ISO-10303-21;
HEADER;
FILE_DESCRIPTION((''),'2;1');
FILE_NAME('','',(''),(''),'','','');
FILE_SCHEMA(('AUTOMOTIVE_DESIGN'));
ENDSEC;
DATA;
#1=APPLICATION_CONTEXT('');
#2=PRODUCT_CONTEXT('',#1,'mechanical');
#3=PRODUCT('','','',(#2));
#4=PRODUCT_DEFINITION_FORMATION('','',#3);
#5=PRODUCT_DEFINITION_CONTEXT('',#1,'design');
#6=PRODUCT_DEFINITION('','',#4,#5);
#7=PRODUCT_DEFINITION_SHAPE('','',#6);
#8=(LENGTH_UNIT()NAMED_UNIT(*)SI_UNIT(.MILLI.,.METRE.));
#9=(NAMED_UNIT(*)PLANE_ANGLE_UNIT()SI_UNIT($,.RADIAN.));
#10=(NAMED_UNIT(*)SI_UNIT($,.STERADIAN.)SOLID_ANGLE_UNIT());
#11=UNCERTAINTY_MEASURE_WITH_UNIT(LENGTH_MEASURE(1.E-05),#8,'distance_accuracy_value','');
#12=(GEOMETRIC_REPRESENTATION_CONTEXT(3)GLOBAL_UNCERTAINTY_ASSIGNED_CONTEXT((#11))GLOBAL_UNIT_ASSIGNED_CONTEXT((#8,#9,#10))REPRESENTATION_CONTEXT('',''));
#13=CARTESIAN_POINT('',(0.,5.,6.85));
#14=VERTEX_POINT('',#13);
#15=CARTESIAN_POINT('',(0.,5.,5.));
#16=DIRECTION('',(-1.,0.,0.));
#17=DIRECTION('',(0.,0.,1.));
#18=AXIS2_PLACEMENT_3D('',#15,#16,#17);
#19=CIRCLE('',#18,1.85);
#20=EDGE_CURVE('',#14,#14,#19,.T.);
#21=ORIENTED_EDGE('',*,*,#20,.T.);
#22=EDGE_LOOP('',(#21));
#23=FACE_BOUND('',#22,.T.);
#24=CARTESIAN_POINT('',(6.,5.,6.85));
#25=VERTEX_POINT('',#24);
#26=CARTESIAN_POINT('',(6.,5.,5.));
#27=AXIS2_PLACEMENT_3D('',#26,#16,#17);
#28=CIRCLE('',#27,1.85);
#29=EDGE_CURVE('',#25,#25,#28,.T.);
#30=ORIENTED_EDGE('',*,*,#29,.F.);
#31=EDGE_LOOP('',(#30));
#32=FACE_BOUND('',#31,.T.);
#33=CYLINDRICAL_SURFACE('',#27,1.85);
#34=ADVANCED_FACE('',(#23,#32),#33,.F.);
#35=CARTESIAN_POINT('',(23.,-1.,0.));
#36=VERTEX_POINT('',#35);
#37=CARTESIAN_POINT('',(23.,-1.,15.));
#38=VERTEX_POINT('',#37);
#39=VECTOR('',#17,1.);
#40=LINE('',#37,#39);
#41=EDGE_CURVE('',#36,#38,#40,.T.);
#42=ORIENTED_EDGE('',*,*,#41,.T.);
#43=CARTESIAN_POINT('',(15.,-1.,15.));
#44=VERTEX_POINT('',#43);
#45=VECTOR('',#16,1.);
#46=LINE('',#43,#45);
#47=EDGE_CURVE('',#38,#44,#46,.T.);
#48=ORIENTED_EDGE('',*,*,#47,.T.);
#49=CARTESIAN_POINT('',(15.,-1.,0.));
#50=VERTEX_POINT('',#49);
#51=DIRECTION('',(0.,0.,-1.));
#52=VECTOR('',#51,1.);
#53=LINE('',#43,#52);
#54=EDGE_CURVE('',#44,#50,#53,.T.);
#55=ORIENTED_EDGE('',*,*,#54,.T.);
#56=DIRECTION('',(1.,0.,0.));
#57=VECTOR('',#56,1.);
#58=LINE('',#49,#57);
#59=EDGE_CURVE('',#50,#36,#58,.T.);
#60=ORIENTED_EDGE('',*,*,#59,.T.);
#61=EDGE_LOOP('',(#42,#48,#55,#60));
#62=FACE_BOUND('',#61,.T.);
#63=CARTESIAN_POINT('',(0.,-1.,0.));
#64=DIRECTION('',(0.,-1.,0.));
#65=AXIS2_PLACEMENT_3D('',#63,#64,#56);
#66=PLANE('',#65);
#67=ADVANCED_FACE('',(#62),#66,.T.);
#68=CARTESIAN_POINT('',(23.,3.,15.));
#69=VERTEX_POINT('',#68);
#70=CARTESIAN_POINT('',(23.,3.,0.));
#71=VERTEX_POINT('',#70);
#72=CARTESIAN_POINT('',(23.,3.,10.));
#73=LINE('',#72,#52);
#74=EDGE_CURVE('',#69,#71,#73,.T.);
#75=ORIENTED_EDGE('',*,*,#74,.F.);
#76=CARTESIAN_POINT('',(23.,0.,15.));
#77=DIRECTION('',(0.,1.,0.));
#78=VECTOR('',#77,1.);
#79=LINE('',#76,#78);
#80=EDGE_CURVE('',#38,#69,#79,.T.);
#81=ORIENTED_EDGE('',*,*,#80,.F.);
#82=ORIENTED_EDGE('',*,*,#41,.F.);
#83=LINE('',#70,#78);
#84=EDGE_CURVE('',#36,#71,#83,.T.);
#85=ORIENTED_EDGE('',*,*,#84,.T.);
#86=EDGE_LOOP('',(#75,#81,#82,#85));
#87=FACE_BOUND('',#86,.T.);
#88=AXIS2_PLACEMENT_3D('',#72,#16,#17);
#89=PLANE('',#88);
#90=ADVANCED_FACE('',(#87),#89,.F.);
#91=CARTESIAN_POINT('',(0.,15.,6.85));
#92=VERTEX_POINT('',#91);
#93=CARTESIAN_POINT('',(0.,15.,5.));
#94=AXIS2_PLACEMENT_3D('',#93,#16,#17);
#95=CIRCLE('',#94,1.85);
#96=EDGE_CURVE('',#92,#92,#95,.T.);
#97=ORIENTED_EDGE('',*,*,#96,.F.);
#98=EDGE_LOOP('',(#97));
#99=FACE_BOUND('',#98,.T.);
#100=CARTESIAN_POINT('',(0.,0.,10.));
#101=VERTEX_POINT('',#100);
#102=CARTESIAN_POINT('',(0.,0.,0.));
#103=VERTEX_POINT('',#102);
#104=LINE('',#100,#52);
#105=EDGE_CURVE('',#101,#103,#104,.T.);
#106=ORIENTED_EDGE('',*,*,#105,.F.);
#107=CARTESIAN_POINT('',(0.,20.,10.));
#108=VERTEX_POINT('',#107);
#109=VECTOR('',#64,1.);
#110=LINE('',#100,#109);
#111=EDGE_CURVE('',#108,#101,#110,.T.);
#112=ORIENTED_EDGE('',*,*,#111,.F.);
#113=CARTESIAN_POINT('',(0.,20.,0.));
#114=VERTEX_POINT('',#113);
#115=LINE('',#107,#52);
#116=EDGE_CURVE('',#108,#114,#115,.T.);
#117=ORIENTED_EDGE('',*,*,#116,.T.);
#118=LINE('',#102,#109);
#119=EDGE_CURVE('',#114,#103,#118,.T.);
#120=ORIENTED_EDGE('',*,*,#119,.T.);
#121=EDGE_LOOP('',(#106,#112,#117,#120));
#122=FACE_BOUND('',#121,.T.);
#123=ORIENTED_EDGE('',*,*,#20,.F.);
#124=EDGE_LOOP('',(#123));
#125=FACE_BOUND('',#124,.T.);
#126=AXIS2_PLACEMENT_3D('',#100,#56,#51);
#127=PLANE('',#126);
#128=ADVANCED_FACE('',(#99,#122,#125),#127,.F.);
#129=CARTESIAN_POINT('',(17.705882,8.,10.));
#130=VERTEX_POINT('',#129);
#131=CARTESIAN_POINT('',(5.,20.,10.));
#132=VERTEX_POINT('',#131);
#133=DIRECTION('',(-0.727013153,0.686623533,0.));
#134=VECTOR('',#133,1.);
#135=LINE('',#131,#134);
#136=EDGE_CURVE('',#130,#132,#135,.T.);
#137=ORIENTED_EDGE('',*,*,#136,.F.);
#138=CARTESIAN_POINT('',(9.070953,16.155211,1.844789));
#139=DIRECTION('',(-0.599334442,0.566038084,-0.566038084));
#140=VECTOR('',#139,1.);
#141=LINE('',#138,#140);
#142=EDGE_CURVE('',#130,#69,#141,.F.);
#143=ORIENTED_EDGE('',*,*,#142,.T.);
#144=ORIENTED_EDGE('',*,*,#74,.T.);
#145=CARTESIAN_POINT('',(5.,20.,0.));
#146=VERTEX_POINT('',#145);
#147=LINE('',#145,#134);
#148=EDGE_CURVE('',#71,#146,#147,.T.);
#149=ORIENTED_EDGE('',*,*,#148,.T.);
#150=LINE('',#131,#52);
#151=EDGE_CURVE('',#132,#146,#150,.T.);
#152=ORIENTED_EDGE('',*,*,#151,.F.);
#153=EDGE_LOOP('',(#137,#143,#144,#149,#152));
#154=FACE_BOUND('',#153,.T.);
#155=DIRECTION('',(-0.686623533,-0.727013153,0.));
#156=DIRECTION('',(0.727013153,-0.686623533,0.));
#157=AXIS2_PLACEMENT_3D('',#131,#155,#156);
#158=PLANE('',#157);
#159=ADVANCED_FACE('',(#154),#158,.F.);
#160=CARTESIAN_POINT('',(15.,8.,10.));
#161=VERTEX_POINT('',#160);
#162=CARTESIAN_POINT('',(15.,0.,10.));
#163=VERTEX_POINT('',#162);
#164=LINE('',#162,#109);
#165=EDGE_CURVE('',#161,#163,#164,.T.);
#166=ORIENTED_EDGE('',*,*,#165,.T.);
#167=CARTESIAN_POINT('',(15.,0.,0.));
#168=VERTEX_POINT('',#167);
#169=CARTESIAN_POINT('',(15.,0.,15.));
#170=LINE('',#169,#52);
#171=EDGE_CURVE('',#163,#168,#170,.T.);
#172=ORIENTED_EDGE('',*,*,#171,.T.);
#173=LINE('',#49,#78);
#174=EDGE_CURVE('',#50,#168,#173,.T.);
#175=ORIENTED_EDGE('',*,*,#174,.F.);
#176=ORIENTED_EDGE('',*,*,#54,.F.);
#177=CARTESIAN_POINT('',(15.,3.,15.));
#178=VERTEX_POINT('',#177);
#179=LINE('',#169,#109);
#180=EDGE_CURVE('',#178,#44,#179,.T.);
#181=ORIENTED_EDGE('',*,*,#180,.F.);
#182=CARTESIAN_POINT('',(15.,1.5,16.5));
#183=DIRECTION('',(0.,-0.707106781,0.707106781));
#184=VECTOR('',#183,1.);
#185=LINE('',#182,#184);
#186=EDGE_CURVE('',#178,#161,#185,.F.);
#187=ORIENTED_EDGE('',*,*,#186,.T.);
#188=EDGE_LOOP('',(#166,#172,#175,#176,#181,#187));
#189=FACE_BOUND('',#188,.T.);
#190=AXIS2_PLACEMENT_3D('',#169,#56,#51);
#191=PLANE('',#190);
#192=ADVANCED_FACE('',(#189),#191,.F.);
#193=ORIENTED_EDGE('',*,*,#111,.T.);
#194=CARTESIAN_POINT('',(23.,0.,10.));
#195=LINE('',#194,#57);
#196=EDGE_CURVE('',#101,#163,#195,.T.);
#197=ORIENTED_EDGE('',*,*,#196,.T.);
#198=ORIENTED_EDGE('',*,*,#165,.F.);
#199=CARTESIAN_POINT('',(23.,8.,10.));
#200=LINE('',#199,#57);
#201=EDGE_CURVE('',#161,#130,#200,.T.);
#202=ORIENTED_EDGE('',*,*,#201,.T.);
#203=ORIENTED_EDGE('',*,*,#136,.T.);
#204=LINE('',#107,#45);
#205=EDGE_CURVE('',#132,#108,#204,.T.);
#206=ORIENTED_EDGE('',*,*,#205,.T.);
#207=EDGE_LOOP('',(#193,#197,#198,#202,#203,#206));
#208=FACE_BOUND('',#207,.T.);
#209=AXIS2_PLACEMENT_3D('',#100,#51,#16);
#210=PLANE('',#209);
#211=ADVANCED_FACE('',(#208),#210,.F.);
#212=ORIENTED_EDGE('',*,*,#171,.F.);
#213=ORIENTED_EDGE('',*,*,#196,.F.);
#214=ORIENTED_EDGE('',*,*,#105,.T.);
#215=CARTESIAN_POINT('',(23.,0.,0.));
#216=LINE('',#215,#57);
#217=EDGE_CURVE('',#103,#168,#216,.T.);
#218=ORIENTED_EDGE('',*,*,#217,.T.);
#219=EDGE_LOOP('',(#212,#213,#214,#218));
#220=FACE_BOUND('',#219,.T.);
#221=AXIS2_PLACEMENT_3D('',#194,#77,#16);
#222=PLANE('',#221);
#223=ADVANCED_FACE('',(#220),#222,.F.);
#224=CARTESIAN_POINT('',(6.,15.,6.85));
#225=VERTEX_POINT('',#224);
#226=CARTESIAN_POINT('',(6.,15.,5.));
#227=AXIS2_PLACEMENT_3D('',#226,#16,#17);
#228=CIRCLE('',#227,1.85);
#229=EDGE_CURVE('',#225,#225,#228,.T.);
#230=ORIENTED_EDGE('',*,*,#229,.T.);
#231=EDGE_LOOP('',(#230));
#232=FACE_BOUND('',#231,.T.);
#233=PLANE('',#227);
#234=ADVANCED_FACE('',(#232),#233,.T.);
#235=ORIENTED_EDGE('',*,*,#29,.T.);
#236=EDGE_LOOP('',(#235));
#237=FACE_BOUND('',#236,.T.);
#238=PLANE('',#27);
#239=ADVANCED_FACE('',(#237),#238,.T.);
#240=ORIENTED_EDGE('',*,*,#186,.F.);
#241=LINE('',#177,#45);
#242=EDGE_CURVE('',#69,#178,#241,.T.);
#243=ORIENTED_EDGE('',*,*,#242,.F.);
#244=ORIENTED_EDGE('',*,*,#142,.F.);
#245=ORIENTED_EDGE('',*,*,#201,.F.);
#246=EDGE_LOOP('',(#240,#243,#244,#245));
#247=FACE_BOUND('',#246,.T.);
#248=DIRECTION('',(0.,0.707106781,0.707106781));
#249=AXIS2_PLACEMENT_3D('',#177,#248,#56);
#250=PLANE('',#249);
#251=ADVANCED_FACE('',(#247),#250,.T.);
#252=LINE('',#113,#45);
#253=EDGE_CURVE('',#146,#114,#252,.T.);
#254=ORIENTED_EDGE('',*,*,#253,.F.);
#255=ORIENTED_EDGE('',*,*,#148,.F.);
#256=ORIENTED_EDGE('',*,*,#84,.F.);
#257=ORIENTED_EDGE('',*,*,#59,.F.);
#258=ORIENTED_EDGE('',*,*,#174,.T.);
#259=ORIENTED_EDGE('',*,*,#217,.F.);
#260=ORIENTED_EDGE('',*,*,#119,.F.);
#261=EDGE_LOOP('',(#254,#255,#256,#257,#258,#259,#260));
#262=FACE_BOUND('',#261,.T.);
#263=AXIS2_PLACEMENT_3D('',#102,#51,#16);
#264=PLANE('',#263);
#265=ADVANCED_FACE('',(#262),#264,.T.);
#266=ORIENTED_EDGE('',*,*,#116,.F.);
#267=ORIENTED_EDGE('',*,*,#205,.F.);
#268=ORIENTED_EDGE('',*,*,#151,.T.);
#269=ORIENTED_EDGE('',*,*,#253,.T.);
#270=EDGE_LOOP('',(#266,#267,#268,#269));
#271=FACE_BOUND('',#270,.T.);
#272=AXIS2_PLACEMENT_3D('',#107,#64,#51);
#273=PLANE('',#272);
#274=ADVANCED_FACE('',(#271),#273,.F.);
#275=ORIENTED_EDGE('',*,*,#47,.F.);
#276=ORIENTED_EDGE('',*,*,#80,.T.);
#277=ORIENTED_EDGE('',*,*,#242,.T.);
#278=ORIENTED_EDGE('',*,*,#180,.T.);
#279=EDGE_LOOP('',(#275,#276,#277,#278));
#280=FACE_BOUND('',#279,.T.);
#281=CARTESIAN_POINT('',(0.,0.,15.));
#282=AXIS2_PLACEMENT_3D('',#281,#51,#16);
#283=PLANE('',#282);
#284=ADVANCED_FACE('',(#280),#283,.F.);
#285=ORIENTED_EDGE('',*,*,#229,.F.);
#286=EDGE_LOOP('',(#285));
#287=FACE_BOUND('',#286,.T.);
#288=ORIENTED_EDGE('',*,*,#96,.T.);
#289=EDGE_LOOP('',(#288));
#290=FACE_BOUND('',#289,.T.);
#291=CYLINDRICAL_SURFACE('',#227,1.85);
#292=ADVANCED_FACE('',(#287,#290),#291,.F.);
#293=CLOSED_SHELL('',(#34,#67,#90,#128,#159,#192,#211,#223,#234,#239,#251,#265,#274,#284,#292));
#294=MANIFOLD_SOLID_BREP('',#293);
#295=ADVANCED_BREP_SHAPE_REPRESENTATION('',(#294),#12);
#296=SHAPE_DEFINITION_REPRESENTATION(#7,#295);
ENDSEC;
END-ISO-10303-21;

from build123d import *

# Parameters (mm, degrees)
EXTRUDE_1_DEPTH     = 10
SKETCH_2_R          = 1.85
CUT_EXTRUDE_1_DEPTH = 6
SKETCH_3_W          = 8
SKETCH_3_H          = 3
EXTRUDE_2_DEPTH     = 5
CHAMFER_2_SIZE      = 5
SKETCH_4_W          = 8
SKETCH_4_H          = 15
EXTRUDE_3_DEPTH     = 1


with BuildPart() as part:
    # ｽｹｯﾁ1 → ﾎﾞｽ - 押し出し1 (new body)
    with BuildSketch(Plane.XY):
        Polygon((0, 0), (0, 20), (5, 20), (23, 3), (23, 0), align=None)
    extrude(amount=EXTRUDE_1_DEPTH)

    # ｽｹｯﾁ2 → ｶｯﾄ - 押し出し1 (cut)
    with BuildSketch(Plane.ZY):
        with Locations((5, 15)):
            Circle(SKETCH_2_R)
        with Locations((5, 5)):
            Circle(SKETCH_2_R)
    extrude(amount=-CUT_EXTRUDE_1_DEPTH, mode=Mode.SUBTRACT)

    # ｽｹｯﾁ3 → ﾎﾞｽ - 押し出し2 (add)
    with BuildSketch(Plane.XY.offset(10)):
        with Locations((19, 1.5)):
            Rectangle(SKETCH_3_W, SKETCH_3_H)
    extrude(amount=EXTRUDE_2_DEPTH)

    # 面取り2
    chamfer_2_edges = [part.edges().sort_by_distance(p)[0] for p in [
        (19, 3, 10),
    ]]
    chamfer(chamfer_2_edges, length=CHAMFER_2_SIZE - 0.0001)  # a hair under: the kernel refuses the full size

    # ｽｹｯﾁ4 → ﾎﾞｽ - 押し出し3 (add)
    with BuildSketch(Plane(origin=(0, 0, 0), x_dir=(-1, 0, 0), z_dir=(0, -1, 0))):
        with Locations((-19, -7.5)):
            Rectangle(SKETCH_4_W, SKETCH_4_H)
    extrude(amount=EXTRUDE_3_DEPTH)


solid = part.part
